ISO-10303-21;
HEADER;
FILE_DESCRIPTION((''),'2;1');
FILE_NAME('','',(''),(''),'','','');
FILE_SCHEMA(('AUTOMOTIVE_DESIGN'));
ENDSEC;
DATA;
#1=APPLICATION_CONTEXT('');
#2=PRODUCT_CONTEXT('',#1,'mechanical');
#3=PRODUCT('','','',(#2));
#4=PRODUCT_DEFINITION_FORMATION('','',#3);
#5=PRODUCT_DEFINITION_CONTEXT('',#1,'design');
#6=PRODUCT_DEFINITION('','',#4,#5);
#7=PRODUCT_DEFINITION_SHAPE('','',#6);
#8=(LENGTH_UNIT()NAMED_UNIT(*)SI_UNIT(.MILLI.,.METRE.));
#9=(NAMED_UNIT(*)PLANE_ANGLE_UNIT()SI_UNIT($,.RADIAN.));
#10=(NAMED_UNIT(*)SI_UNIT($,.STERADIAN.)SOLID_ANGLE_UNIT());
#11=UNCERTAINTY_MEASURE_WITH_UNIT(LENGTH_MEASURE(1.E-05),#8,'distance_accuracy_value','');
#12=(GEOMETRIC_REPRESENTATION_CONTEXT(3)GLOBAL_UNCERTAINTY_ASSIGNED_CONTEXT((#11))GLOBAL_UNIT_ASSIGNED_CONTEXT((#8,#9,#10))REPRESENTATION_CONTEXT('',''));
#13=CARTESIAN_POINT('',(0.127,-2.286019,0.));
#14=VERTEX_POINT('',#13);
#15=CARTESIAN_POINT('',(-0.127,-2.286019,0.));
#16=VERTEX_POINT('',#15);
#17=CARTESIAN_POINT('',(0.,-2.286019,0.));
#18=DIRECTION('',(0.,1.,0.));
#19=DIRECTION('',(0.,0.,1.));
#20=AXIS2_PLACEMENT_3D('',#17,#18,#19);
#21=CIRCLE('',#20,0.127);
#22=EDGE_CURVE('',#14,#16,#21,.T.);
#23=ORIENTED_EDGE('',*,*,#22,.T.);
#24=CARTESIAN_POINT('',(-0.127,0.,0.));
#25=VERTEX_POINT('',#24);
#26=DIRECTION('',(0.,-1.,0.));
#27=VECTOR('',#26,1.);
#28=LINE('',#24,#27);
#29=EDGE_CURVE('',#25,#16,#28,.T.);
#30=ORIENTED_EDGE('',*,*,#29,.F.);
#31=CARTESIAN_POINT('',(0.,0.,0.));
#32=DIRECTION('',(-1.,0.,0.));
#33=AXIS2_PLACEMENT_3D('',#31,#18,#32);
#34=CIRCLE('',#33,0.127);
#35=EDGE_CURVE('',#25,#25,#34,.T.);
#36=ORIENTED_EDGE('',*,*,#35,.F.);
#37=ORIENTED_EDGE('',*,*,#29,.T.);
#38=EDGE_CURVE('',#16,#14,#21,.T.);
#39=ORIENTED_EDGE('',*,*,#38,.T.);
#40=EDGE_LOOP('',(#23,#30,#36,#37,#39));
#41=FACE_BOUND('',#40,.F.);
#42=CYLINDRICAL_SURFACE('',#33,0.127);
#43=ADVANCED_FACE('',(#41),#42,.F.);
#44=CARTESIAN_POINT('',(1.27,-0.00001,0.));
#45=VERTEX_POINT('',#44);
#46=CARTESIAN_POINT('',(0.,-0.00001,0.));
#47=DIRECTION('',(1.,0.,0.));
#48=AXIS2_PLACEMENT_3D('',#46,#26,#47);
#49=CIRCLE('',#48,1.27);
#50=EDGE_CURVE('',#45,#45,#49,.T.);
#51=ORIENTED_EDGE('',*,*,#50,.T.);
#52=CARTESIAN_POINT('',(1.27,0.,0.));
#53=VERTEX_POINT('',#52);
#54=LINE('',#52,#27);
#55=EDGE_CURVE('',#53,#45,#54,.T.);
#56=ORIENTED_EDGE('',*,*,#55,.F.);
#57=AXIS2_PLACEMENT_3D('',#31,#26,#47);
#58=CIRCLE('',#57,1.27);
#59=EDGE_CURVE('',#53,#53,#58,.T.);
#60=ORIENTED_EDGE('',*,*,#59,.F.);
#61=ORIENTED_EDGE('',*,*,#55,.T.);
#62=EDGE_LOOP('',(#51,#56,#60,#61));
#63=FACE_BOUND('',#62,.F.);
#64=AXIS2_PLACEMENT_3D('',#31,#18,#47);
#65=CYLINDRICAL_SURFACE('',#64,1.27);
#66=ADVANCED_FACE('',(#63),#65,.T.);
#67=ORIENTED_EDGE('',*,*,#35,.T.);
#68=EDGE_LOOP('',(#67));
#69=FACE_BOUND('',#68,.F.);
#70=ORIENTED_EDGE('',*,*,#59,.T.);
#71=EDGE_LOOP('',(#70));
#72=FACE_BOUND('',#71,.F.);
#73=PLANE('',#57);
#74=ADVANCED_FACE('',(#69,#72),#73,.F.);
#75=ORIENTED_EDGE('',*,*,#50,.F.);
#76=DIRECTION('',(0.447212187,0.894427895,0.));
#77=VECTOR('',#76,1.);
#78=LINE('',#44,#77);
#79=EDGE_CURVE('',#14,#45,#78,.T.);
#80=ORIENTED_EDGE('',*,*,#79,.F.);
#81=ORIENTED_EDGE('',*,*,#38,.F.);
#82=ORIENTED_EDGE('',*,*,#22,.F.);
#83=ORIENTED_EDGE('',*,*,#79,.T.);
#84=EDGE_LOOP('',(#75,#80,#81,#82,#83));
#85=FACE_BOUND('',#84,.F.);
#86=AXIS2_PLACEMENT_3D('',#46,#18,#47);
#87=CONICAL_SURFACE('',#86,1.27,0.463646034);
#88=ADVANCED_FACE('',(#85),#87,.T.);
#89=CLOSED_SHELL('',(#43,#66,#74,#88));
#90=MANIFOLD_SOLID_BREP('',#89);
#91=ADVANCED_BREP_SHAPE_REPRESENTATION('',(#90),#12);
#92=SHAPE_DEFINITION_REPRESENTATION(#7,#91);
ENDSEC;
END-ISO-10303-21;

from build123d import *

# Parameters (mm, degrees)
F0_R     = 1.27
F1_DEPTH = 2.54
F2_SIZE2 = 2.53999
F2_SIZE  = 1.26999
F3_R     = 0.127
F4_DEPTH = 2.541


# Not quite as in the source:
# - a fillet or chamfer is up to 0.001 mm smaller than in the source, because OpenCascade refuses the exact size


with BuildPart() as f1:
    # F0 (on Front) → F1 (new body)
    with BuildSketch(Plane.XZ):
        Circle(F0_R)
    extrude(amount=F1_DEPTH)

    # F2 (size 1.27 and 2.54 in the source; OpenCascade refuses exactly that, so slightly less here)
    f2_edges = [f1.edges().sort_by_distance(p)[0] for p in [
        (-1.27, -2.54, 0),
    ]]
    f2_side = f1.faces().sort_by_distance((0, -2.54, 0))[0]
    chamfer(f2_edges, length=F2_SIZE, length2=F2_SIZE2, reference=f2_side)

    # F3 (on face) → F4 (cut, through all)
    with BuildSketch(Plane(origin=(0, 0, 0), x_dir=(-1, 0, 0), z_dir=(0, 1, 0))):
        Circle(F3_R)
    extrude(amount=-F4_DEPTH, mode=Mode.SUBTRACT)


solid = f1.part
